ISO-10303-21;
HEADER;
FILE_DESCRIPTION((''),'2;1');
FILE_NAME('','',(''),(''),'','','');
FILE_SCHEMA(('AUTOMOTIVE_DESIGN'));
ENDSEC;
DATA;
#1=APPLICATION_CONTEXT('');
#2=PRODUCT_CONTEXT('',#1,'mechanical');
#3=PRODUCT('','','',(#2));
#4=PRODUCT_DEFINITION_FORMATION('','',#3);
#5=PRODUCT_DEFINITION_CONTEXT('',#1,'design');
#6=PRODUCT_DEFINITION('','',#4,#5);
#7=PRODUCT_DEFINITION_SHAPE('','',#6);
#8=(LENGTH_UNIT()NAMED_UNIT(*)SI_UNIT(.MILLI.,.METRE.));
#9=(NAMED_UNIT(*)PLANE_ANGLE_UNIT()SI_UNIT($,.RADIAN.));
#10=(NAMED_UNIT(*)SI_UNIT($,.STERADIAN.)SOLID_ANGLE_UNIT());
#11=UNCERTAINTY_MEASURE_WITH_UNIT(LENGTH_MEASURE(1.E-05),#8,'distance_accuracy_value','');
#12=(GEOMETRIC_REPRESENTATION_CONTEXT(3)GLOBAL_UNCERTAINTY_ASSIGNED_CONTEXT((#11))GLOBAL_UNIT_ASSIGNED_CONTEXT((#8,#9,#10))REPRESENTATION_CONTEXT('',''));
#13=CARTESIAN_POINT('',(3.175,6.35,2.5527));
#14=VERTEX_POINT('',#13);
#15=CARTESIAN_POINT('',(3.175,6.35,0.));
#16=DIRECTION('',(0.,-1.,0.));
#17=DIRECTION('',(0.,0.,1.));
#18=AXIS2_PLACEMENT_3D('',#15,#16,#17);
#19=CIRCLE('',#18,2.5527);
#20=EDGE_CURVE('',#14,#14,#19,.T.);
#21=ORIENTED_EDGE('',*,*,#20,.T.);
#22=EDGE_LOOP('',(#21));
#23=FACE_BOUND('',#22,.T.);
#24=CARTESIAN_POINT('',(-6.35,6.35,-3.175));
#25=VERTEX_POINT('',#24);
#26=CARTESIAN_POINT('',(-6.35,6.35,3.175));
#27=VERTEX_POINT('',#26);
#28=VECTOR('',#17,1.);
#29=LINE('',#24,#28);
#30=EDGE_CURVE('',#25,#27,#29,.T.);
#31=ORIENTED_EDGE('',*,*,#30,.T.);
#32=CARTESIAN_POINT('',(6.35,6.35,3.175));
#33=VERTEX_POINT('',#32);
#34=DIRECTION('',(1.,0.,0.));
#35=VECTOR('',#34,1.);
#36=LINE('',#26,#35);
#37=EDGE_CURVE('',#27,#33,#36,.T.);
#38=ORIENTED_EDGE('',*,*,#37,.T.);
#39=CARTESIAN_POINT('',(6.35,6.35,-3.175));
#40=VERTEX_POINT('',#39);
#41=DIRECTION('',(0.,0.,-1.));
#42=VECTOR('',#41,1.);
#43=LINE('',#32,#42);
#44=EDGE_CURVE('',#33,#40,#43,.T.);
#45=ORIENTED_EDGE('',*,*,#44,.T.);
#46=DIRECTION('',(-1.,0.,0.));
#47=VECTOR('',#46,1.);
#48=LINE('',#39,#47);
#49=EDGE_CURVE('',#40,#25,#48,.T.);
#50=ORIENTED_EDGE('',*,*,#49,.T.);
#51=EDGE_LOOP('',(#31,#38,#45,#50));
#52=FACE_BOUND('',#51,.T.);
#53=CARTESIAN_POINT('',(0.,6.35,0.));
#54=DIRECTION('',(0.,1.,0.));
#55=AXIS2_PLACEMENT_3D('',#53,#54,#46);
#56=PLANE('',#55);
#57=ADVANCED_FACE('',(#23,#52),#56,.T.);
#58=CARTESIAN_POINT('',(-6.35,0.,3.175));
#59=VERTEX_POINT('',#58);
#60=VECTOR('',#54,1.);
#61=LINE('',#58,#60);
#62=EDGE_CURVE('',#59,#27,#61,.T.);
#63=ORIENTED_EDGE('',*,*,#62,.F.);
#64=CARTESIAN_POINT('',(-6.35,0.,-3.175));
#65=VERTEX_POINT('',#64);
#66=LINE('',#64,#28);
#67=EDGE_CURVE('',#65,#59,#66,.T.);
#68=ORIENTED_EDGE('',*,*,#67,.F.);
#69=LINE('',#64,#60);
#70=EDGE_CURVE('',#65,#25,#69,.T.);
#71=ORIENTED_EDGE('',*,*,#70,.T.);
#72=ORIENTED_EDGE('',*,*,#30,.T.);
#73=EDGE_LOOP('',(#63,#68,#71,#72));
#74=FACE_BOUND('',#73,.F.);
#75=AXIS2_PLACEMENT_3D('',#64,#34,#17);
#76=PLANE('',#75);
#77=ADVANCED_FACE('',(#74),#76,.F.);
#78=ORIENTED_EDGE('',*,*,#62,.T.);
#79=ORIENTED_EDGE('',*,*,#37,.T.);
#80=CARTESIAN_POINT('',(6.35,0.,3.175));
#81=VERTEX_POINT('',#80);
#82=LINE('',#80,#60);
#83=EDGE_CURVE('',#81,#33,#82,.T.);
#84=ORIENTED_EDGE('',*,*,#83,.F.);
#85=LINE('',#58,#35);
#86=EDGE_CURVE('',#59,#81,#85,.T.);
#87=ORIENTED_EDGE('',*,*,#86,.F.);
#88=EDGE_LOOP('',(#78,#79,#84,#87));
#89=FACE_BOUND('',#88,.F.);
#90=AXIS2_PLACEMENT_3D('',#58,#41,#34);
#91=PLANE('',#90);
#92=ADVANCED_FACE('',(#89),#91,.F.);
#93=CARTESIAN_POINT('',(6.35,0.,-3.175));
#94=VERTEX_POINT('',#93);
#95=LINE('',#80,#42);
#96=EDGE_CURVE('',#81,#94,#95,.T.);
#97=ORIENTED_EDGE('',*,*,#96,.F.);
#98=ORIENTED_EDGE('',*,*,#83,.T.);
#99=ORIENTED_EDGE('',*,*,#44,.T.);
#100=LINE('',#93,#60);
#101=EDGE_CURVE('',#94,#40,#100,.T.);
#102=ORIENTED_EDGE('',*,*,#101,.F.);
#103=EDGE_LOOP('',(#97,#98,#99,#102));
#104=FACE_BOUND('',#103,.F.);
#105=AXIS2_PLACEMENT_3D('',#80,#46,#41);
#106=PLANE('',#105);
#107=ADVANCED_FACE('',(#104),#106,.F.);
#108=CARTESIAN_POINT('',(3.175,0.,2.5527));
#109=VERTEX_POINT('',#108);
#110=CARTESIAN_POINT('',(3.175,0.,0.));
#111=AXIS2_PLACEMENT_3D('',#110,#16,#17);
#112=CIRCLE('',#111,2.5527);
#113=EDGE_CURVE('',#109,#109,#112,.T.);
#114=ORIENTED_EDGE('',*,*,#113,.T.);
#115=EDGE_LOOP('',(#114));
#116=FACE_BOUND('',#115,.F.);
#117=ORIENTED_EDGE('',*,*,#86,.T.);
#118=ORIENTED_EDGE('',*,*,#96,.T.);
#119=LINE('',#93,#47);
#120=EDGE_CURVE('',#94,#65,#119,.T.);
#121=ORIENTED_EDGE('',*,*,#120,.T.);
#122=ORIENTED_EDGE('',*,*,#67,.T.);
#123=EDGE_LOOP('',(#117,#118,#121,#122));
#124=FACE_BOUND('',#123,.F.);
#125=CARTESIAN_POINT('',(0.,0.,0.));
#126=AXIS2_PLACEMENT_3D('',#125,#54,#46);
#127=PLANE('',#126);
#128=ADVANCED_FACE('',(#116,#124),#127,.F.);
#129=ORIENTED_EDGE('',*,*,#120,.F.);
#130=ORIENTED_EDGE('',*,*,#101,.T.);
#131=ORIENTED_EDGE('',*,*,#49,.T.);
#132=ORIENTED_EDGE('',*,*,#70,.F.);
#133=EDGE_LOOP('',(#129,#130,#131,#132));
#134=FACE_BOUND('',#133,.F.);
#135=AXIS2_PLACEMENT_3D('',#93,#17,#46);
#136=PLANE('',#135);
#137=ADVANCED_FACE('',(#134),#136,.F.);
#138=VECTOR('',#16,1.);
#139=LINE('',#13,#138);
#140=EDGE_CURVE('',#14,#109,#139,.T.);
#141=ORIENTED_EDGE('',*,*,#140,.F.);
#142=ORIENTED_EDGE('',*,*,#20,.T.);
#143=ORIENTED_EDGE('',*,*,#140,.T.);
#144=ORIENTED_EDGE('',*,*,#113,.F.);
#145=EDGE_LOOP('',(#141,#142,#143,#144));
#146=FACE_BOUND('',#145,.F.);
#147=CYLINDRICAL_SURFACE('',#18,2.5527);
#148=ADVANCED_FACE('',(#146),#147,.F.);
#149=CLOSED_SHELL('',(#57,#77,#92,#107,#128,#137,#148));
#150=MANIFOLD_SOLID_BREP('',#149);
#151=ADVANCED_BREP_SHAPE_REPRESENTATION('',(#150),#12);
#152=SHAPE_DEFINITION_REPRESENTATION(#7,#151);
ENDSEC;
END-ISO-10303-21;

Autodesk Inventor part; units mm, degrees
ref_plane "YZ Plane" through (0, 0, 0) normal (1, 0, 0) x (0, 1, 0)
ref_plane "XZ Plane" through (0, 0, 0) normal (0, 1, 0) x (-1, 0, 0)
ref_plane "XY Plane" through (0, 0, 0) normal (0, 0, 1) x (1, 0, 0)
sketch "Sketch1" plane through (0, 0, 0) normal (0, 1, 0) x (-1, 0, 0)
  line L0 (-6.35, -3.175) -> (6.35, -3.175)
  line L1 (6.35, -3.175) -> (6.35, 3.175)
  line L2 (6.35, 3.175) -> (-6.35, 3.175)
  line L3 (-6.35, 3.175) -> (-6.35, -3.175)
  line L4 (-6.35, -3.175) -> (6.35, 3.175) construction
  line L5 (6.35, -3.175) -> (-6.35, 3.175) construction
  point P0 (0, 0)
  dimension "d0" = 12.7
  dimension "d1" = 6.35
extrude "Extrusion1" add sketch "Sketch1" along normal blind 6.35
sketch "Sketch2" plane through (0, 6.35, 0) normal (0, 1, 0) x (1, 0, 0)
  line L0 (0, 0) -> (3.175, 0)
  dimension "d4" = 3.175
hole "Hole1" at (3.175, 6.35, 0) direction (0, -1, 0) diameter 5.1054 end up to surface clearance for "Flat Head Machine Screw (82)" size "#10" standard "Ansi Unified Screw Threads"
properties part number "sheild stop" material "Aluminum 6061"
